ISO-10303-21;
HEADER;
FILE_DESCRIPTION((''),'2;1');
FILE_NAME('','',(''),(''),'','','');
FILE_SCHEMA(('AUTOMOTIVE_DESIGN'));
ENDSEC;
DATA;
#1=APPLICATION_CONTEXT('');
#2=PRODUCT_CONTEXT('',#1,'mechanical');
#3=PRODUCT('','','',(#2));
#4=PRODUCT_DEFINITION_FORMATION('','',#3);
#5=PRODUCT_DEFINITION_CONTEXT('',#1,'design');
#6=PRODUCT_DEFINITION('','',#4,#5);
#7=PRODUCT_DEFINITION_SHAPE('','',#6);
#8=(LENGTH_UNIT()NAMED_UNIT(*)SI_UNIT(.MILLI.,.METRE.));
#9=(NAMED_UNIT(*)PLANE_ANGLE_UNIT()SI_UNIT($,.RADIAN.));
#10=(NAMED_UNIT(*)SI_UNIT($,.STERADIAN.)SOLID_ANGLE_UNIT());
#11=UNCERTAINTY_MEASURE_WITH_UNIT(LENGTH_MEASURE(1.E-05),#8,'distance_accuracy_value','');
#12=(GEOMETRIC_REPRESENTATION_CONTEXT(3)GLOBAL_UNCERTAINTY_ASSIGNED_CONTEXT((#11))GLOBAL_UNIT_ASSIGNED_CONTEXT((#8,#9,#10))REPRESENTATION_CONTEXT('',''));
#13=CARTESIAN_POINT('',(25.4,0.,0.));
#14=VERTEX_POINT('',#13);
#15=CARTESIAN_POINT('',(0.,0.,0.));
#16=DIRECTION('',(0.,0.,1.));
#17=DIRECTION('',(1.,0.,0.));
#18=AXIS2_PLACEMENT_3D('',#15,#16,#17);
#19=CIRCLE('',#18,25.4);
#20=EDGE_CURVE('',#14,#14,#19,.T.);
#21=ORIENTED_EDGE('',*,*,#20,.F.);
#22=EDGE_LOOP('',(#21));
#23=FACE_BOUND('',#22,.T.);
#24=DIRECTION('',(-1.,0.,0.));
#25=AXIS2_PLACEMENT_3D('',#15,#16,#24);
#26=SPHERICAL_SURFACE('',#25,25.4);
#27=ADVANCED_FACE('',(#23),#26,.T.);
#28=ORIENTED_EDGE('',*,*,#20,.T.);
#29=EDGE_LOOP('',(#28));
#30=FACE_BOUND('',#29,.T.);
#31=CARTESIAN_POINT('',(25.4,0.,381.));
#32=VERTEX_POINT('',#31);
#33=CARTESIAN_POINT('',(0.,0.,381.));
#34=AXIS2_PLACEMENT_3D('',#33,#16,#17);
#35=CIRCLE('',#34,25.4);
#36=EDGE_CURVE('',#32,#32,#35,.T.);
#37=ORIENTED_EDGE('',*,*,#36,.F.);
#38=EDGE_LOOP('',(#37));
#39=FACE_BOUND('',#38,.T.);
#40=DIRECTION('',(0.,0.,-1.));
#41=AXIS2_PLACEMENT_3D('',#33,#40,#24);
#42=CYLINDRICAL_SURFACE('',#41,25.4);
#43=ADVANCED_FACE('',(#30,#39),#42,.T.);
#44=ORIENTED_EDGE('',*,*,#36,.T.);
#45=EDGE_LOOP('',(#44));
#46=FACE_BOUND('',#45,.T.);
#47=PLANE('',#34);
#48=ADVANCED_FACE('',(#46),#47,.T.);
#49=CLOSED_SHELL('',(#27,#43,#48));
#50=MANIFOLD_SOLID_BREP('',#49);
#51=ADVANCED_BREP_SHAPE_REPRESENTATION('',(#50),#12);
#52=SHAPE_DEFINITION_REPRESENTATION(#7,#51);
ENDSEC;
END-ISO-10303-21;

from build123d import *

# Parameters (mm, degrees)
SKETCH1_R           = 25.4
BOSS_EXTRUDE3_DEPTH = 381


with BuildPart() as part:
    # Sketch1 → Boss-Extrude3 (new body)
    with BuildSketch(Plane.XY):
        Circle(SKETCH1_R)
    extrude(amount=BOSS_EXTRUDE3_DEPTH)

    # Sketch4 → Revolve3 (revolve)
    with BuildSketch(Plane(origin=(0, 0, 0), x_dir=(1, 0, 0), z_dir=(0, 1, 0))):
        with BuildLine():
            Line((-25.4, 0), (0, 0))
            Line((0, 0), (0, 25.4))
            ThreePointArc((0, 25.4), (-17.960512242, 17.960512242), (-25.4, 0))
        make_face()
    revolve(axis=Axis((0, 0, 0), (0, 0, -1)))


solid = part.part
